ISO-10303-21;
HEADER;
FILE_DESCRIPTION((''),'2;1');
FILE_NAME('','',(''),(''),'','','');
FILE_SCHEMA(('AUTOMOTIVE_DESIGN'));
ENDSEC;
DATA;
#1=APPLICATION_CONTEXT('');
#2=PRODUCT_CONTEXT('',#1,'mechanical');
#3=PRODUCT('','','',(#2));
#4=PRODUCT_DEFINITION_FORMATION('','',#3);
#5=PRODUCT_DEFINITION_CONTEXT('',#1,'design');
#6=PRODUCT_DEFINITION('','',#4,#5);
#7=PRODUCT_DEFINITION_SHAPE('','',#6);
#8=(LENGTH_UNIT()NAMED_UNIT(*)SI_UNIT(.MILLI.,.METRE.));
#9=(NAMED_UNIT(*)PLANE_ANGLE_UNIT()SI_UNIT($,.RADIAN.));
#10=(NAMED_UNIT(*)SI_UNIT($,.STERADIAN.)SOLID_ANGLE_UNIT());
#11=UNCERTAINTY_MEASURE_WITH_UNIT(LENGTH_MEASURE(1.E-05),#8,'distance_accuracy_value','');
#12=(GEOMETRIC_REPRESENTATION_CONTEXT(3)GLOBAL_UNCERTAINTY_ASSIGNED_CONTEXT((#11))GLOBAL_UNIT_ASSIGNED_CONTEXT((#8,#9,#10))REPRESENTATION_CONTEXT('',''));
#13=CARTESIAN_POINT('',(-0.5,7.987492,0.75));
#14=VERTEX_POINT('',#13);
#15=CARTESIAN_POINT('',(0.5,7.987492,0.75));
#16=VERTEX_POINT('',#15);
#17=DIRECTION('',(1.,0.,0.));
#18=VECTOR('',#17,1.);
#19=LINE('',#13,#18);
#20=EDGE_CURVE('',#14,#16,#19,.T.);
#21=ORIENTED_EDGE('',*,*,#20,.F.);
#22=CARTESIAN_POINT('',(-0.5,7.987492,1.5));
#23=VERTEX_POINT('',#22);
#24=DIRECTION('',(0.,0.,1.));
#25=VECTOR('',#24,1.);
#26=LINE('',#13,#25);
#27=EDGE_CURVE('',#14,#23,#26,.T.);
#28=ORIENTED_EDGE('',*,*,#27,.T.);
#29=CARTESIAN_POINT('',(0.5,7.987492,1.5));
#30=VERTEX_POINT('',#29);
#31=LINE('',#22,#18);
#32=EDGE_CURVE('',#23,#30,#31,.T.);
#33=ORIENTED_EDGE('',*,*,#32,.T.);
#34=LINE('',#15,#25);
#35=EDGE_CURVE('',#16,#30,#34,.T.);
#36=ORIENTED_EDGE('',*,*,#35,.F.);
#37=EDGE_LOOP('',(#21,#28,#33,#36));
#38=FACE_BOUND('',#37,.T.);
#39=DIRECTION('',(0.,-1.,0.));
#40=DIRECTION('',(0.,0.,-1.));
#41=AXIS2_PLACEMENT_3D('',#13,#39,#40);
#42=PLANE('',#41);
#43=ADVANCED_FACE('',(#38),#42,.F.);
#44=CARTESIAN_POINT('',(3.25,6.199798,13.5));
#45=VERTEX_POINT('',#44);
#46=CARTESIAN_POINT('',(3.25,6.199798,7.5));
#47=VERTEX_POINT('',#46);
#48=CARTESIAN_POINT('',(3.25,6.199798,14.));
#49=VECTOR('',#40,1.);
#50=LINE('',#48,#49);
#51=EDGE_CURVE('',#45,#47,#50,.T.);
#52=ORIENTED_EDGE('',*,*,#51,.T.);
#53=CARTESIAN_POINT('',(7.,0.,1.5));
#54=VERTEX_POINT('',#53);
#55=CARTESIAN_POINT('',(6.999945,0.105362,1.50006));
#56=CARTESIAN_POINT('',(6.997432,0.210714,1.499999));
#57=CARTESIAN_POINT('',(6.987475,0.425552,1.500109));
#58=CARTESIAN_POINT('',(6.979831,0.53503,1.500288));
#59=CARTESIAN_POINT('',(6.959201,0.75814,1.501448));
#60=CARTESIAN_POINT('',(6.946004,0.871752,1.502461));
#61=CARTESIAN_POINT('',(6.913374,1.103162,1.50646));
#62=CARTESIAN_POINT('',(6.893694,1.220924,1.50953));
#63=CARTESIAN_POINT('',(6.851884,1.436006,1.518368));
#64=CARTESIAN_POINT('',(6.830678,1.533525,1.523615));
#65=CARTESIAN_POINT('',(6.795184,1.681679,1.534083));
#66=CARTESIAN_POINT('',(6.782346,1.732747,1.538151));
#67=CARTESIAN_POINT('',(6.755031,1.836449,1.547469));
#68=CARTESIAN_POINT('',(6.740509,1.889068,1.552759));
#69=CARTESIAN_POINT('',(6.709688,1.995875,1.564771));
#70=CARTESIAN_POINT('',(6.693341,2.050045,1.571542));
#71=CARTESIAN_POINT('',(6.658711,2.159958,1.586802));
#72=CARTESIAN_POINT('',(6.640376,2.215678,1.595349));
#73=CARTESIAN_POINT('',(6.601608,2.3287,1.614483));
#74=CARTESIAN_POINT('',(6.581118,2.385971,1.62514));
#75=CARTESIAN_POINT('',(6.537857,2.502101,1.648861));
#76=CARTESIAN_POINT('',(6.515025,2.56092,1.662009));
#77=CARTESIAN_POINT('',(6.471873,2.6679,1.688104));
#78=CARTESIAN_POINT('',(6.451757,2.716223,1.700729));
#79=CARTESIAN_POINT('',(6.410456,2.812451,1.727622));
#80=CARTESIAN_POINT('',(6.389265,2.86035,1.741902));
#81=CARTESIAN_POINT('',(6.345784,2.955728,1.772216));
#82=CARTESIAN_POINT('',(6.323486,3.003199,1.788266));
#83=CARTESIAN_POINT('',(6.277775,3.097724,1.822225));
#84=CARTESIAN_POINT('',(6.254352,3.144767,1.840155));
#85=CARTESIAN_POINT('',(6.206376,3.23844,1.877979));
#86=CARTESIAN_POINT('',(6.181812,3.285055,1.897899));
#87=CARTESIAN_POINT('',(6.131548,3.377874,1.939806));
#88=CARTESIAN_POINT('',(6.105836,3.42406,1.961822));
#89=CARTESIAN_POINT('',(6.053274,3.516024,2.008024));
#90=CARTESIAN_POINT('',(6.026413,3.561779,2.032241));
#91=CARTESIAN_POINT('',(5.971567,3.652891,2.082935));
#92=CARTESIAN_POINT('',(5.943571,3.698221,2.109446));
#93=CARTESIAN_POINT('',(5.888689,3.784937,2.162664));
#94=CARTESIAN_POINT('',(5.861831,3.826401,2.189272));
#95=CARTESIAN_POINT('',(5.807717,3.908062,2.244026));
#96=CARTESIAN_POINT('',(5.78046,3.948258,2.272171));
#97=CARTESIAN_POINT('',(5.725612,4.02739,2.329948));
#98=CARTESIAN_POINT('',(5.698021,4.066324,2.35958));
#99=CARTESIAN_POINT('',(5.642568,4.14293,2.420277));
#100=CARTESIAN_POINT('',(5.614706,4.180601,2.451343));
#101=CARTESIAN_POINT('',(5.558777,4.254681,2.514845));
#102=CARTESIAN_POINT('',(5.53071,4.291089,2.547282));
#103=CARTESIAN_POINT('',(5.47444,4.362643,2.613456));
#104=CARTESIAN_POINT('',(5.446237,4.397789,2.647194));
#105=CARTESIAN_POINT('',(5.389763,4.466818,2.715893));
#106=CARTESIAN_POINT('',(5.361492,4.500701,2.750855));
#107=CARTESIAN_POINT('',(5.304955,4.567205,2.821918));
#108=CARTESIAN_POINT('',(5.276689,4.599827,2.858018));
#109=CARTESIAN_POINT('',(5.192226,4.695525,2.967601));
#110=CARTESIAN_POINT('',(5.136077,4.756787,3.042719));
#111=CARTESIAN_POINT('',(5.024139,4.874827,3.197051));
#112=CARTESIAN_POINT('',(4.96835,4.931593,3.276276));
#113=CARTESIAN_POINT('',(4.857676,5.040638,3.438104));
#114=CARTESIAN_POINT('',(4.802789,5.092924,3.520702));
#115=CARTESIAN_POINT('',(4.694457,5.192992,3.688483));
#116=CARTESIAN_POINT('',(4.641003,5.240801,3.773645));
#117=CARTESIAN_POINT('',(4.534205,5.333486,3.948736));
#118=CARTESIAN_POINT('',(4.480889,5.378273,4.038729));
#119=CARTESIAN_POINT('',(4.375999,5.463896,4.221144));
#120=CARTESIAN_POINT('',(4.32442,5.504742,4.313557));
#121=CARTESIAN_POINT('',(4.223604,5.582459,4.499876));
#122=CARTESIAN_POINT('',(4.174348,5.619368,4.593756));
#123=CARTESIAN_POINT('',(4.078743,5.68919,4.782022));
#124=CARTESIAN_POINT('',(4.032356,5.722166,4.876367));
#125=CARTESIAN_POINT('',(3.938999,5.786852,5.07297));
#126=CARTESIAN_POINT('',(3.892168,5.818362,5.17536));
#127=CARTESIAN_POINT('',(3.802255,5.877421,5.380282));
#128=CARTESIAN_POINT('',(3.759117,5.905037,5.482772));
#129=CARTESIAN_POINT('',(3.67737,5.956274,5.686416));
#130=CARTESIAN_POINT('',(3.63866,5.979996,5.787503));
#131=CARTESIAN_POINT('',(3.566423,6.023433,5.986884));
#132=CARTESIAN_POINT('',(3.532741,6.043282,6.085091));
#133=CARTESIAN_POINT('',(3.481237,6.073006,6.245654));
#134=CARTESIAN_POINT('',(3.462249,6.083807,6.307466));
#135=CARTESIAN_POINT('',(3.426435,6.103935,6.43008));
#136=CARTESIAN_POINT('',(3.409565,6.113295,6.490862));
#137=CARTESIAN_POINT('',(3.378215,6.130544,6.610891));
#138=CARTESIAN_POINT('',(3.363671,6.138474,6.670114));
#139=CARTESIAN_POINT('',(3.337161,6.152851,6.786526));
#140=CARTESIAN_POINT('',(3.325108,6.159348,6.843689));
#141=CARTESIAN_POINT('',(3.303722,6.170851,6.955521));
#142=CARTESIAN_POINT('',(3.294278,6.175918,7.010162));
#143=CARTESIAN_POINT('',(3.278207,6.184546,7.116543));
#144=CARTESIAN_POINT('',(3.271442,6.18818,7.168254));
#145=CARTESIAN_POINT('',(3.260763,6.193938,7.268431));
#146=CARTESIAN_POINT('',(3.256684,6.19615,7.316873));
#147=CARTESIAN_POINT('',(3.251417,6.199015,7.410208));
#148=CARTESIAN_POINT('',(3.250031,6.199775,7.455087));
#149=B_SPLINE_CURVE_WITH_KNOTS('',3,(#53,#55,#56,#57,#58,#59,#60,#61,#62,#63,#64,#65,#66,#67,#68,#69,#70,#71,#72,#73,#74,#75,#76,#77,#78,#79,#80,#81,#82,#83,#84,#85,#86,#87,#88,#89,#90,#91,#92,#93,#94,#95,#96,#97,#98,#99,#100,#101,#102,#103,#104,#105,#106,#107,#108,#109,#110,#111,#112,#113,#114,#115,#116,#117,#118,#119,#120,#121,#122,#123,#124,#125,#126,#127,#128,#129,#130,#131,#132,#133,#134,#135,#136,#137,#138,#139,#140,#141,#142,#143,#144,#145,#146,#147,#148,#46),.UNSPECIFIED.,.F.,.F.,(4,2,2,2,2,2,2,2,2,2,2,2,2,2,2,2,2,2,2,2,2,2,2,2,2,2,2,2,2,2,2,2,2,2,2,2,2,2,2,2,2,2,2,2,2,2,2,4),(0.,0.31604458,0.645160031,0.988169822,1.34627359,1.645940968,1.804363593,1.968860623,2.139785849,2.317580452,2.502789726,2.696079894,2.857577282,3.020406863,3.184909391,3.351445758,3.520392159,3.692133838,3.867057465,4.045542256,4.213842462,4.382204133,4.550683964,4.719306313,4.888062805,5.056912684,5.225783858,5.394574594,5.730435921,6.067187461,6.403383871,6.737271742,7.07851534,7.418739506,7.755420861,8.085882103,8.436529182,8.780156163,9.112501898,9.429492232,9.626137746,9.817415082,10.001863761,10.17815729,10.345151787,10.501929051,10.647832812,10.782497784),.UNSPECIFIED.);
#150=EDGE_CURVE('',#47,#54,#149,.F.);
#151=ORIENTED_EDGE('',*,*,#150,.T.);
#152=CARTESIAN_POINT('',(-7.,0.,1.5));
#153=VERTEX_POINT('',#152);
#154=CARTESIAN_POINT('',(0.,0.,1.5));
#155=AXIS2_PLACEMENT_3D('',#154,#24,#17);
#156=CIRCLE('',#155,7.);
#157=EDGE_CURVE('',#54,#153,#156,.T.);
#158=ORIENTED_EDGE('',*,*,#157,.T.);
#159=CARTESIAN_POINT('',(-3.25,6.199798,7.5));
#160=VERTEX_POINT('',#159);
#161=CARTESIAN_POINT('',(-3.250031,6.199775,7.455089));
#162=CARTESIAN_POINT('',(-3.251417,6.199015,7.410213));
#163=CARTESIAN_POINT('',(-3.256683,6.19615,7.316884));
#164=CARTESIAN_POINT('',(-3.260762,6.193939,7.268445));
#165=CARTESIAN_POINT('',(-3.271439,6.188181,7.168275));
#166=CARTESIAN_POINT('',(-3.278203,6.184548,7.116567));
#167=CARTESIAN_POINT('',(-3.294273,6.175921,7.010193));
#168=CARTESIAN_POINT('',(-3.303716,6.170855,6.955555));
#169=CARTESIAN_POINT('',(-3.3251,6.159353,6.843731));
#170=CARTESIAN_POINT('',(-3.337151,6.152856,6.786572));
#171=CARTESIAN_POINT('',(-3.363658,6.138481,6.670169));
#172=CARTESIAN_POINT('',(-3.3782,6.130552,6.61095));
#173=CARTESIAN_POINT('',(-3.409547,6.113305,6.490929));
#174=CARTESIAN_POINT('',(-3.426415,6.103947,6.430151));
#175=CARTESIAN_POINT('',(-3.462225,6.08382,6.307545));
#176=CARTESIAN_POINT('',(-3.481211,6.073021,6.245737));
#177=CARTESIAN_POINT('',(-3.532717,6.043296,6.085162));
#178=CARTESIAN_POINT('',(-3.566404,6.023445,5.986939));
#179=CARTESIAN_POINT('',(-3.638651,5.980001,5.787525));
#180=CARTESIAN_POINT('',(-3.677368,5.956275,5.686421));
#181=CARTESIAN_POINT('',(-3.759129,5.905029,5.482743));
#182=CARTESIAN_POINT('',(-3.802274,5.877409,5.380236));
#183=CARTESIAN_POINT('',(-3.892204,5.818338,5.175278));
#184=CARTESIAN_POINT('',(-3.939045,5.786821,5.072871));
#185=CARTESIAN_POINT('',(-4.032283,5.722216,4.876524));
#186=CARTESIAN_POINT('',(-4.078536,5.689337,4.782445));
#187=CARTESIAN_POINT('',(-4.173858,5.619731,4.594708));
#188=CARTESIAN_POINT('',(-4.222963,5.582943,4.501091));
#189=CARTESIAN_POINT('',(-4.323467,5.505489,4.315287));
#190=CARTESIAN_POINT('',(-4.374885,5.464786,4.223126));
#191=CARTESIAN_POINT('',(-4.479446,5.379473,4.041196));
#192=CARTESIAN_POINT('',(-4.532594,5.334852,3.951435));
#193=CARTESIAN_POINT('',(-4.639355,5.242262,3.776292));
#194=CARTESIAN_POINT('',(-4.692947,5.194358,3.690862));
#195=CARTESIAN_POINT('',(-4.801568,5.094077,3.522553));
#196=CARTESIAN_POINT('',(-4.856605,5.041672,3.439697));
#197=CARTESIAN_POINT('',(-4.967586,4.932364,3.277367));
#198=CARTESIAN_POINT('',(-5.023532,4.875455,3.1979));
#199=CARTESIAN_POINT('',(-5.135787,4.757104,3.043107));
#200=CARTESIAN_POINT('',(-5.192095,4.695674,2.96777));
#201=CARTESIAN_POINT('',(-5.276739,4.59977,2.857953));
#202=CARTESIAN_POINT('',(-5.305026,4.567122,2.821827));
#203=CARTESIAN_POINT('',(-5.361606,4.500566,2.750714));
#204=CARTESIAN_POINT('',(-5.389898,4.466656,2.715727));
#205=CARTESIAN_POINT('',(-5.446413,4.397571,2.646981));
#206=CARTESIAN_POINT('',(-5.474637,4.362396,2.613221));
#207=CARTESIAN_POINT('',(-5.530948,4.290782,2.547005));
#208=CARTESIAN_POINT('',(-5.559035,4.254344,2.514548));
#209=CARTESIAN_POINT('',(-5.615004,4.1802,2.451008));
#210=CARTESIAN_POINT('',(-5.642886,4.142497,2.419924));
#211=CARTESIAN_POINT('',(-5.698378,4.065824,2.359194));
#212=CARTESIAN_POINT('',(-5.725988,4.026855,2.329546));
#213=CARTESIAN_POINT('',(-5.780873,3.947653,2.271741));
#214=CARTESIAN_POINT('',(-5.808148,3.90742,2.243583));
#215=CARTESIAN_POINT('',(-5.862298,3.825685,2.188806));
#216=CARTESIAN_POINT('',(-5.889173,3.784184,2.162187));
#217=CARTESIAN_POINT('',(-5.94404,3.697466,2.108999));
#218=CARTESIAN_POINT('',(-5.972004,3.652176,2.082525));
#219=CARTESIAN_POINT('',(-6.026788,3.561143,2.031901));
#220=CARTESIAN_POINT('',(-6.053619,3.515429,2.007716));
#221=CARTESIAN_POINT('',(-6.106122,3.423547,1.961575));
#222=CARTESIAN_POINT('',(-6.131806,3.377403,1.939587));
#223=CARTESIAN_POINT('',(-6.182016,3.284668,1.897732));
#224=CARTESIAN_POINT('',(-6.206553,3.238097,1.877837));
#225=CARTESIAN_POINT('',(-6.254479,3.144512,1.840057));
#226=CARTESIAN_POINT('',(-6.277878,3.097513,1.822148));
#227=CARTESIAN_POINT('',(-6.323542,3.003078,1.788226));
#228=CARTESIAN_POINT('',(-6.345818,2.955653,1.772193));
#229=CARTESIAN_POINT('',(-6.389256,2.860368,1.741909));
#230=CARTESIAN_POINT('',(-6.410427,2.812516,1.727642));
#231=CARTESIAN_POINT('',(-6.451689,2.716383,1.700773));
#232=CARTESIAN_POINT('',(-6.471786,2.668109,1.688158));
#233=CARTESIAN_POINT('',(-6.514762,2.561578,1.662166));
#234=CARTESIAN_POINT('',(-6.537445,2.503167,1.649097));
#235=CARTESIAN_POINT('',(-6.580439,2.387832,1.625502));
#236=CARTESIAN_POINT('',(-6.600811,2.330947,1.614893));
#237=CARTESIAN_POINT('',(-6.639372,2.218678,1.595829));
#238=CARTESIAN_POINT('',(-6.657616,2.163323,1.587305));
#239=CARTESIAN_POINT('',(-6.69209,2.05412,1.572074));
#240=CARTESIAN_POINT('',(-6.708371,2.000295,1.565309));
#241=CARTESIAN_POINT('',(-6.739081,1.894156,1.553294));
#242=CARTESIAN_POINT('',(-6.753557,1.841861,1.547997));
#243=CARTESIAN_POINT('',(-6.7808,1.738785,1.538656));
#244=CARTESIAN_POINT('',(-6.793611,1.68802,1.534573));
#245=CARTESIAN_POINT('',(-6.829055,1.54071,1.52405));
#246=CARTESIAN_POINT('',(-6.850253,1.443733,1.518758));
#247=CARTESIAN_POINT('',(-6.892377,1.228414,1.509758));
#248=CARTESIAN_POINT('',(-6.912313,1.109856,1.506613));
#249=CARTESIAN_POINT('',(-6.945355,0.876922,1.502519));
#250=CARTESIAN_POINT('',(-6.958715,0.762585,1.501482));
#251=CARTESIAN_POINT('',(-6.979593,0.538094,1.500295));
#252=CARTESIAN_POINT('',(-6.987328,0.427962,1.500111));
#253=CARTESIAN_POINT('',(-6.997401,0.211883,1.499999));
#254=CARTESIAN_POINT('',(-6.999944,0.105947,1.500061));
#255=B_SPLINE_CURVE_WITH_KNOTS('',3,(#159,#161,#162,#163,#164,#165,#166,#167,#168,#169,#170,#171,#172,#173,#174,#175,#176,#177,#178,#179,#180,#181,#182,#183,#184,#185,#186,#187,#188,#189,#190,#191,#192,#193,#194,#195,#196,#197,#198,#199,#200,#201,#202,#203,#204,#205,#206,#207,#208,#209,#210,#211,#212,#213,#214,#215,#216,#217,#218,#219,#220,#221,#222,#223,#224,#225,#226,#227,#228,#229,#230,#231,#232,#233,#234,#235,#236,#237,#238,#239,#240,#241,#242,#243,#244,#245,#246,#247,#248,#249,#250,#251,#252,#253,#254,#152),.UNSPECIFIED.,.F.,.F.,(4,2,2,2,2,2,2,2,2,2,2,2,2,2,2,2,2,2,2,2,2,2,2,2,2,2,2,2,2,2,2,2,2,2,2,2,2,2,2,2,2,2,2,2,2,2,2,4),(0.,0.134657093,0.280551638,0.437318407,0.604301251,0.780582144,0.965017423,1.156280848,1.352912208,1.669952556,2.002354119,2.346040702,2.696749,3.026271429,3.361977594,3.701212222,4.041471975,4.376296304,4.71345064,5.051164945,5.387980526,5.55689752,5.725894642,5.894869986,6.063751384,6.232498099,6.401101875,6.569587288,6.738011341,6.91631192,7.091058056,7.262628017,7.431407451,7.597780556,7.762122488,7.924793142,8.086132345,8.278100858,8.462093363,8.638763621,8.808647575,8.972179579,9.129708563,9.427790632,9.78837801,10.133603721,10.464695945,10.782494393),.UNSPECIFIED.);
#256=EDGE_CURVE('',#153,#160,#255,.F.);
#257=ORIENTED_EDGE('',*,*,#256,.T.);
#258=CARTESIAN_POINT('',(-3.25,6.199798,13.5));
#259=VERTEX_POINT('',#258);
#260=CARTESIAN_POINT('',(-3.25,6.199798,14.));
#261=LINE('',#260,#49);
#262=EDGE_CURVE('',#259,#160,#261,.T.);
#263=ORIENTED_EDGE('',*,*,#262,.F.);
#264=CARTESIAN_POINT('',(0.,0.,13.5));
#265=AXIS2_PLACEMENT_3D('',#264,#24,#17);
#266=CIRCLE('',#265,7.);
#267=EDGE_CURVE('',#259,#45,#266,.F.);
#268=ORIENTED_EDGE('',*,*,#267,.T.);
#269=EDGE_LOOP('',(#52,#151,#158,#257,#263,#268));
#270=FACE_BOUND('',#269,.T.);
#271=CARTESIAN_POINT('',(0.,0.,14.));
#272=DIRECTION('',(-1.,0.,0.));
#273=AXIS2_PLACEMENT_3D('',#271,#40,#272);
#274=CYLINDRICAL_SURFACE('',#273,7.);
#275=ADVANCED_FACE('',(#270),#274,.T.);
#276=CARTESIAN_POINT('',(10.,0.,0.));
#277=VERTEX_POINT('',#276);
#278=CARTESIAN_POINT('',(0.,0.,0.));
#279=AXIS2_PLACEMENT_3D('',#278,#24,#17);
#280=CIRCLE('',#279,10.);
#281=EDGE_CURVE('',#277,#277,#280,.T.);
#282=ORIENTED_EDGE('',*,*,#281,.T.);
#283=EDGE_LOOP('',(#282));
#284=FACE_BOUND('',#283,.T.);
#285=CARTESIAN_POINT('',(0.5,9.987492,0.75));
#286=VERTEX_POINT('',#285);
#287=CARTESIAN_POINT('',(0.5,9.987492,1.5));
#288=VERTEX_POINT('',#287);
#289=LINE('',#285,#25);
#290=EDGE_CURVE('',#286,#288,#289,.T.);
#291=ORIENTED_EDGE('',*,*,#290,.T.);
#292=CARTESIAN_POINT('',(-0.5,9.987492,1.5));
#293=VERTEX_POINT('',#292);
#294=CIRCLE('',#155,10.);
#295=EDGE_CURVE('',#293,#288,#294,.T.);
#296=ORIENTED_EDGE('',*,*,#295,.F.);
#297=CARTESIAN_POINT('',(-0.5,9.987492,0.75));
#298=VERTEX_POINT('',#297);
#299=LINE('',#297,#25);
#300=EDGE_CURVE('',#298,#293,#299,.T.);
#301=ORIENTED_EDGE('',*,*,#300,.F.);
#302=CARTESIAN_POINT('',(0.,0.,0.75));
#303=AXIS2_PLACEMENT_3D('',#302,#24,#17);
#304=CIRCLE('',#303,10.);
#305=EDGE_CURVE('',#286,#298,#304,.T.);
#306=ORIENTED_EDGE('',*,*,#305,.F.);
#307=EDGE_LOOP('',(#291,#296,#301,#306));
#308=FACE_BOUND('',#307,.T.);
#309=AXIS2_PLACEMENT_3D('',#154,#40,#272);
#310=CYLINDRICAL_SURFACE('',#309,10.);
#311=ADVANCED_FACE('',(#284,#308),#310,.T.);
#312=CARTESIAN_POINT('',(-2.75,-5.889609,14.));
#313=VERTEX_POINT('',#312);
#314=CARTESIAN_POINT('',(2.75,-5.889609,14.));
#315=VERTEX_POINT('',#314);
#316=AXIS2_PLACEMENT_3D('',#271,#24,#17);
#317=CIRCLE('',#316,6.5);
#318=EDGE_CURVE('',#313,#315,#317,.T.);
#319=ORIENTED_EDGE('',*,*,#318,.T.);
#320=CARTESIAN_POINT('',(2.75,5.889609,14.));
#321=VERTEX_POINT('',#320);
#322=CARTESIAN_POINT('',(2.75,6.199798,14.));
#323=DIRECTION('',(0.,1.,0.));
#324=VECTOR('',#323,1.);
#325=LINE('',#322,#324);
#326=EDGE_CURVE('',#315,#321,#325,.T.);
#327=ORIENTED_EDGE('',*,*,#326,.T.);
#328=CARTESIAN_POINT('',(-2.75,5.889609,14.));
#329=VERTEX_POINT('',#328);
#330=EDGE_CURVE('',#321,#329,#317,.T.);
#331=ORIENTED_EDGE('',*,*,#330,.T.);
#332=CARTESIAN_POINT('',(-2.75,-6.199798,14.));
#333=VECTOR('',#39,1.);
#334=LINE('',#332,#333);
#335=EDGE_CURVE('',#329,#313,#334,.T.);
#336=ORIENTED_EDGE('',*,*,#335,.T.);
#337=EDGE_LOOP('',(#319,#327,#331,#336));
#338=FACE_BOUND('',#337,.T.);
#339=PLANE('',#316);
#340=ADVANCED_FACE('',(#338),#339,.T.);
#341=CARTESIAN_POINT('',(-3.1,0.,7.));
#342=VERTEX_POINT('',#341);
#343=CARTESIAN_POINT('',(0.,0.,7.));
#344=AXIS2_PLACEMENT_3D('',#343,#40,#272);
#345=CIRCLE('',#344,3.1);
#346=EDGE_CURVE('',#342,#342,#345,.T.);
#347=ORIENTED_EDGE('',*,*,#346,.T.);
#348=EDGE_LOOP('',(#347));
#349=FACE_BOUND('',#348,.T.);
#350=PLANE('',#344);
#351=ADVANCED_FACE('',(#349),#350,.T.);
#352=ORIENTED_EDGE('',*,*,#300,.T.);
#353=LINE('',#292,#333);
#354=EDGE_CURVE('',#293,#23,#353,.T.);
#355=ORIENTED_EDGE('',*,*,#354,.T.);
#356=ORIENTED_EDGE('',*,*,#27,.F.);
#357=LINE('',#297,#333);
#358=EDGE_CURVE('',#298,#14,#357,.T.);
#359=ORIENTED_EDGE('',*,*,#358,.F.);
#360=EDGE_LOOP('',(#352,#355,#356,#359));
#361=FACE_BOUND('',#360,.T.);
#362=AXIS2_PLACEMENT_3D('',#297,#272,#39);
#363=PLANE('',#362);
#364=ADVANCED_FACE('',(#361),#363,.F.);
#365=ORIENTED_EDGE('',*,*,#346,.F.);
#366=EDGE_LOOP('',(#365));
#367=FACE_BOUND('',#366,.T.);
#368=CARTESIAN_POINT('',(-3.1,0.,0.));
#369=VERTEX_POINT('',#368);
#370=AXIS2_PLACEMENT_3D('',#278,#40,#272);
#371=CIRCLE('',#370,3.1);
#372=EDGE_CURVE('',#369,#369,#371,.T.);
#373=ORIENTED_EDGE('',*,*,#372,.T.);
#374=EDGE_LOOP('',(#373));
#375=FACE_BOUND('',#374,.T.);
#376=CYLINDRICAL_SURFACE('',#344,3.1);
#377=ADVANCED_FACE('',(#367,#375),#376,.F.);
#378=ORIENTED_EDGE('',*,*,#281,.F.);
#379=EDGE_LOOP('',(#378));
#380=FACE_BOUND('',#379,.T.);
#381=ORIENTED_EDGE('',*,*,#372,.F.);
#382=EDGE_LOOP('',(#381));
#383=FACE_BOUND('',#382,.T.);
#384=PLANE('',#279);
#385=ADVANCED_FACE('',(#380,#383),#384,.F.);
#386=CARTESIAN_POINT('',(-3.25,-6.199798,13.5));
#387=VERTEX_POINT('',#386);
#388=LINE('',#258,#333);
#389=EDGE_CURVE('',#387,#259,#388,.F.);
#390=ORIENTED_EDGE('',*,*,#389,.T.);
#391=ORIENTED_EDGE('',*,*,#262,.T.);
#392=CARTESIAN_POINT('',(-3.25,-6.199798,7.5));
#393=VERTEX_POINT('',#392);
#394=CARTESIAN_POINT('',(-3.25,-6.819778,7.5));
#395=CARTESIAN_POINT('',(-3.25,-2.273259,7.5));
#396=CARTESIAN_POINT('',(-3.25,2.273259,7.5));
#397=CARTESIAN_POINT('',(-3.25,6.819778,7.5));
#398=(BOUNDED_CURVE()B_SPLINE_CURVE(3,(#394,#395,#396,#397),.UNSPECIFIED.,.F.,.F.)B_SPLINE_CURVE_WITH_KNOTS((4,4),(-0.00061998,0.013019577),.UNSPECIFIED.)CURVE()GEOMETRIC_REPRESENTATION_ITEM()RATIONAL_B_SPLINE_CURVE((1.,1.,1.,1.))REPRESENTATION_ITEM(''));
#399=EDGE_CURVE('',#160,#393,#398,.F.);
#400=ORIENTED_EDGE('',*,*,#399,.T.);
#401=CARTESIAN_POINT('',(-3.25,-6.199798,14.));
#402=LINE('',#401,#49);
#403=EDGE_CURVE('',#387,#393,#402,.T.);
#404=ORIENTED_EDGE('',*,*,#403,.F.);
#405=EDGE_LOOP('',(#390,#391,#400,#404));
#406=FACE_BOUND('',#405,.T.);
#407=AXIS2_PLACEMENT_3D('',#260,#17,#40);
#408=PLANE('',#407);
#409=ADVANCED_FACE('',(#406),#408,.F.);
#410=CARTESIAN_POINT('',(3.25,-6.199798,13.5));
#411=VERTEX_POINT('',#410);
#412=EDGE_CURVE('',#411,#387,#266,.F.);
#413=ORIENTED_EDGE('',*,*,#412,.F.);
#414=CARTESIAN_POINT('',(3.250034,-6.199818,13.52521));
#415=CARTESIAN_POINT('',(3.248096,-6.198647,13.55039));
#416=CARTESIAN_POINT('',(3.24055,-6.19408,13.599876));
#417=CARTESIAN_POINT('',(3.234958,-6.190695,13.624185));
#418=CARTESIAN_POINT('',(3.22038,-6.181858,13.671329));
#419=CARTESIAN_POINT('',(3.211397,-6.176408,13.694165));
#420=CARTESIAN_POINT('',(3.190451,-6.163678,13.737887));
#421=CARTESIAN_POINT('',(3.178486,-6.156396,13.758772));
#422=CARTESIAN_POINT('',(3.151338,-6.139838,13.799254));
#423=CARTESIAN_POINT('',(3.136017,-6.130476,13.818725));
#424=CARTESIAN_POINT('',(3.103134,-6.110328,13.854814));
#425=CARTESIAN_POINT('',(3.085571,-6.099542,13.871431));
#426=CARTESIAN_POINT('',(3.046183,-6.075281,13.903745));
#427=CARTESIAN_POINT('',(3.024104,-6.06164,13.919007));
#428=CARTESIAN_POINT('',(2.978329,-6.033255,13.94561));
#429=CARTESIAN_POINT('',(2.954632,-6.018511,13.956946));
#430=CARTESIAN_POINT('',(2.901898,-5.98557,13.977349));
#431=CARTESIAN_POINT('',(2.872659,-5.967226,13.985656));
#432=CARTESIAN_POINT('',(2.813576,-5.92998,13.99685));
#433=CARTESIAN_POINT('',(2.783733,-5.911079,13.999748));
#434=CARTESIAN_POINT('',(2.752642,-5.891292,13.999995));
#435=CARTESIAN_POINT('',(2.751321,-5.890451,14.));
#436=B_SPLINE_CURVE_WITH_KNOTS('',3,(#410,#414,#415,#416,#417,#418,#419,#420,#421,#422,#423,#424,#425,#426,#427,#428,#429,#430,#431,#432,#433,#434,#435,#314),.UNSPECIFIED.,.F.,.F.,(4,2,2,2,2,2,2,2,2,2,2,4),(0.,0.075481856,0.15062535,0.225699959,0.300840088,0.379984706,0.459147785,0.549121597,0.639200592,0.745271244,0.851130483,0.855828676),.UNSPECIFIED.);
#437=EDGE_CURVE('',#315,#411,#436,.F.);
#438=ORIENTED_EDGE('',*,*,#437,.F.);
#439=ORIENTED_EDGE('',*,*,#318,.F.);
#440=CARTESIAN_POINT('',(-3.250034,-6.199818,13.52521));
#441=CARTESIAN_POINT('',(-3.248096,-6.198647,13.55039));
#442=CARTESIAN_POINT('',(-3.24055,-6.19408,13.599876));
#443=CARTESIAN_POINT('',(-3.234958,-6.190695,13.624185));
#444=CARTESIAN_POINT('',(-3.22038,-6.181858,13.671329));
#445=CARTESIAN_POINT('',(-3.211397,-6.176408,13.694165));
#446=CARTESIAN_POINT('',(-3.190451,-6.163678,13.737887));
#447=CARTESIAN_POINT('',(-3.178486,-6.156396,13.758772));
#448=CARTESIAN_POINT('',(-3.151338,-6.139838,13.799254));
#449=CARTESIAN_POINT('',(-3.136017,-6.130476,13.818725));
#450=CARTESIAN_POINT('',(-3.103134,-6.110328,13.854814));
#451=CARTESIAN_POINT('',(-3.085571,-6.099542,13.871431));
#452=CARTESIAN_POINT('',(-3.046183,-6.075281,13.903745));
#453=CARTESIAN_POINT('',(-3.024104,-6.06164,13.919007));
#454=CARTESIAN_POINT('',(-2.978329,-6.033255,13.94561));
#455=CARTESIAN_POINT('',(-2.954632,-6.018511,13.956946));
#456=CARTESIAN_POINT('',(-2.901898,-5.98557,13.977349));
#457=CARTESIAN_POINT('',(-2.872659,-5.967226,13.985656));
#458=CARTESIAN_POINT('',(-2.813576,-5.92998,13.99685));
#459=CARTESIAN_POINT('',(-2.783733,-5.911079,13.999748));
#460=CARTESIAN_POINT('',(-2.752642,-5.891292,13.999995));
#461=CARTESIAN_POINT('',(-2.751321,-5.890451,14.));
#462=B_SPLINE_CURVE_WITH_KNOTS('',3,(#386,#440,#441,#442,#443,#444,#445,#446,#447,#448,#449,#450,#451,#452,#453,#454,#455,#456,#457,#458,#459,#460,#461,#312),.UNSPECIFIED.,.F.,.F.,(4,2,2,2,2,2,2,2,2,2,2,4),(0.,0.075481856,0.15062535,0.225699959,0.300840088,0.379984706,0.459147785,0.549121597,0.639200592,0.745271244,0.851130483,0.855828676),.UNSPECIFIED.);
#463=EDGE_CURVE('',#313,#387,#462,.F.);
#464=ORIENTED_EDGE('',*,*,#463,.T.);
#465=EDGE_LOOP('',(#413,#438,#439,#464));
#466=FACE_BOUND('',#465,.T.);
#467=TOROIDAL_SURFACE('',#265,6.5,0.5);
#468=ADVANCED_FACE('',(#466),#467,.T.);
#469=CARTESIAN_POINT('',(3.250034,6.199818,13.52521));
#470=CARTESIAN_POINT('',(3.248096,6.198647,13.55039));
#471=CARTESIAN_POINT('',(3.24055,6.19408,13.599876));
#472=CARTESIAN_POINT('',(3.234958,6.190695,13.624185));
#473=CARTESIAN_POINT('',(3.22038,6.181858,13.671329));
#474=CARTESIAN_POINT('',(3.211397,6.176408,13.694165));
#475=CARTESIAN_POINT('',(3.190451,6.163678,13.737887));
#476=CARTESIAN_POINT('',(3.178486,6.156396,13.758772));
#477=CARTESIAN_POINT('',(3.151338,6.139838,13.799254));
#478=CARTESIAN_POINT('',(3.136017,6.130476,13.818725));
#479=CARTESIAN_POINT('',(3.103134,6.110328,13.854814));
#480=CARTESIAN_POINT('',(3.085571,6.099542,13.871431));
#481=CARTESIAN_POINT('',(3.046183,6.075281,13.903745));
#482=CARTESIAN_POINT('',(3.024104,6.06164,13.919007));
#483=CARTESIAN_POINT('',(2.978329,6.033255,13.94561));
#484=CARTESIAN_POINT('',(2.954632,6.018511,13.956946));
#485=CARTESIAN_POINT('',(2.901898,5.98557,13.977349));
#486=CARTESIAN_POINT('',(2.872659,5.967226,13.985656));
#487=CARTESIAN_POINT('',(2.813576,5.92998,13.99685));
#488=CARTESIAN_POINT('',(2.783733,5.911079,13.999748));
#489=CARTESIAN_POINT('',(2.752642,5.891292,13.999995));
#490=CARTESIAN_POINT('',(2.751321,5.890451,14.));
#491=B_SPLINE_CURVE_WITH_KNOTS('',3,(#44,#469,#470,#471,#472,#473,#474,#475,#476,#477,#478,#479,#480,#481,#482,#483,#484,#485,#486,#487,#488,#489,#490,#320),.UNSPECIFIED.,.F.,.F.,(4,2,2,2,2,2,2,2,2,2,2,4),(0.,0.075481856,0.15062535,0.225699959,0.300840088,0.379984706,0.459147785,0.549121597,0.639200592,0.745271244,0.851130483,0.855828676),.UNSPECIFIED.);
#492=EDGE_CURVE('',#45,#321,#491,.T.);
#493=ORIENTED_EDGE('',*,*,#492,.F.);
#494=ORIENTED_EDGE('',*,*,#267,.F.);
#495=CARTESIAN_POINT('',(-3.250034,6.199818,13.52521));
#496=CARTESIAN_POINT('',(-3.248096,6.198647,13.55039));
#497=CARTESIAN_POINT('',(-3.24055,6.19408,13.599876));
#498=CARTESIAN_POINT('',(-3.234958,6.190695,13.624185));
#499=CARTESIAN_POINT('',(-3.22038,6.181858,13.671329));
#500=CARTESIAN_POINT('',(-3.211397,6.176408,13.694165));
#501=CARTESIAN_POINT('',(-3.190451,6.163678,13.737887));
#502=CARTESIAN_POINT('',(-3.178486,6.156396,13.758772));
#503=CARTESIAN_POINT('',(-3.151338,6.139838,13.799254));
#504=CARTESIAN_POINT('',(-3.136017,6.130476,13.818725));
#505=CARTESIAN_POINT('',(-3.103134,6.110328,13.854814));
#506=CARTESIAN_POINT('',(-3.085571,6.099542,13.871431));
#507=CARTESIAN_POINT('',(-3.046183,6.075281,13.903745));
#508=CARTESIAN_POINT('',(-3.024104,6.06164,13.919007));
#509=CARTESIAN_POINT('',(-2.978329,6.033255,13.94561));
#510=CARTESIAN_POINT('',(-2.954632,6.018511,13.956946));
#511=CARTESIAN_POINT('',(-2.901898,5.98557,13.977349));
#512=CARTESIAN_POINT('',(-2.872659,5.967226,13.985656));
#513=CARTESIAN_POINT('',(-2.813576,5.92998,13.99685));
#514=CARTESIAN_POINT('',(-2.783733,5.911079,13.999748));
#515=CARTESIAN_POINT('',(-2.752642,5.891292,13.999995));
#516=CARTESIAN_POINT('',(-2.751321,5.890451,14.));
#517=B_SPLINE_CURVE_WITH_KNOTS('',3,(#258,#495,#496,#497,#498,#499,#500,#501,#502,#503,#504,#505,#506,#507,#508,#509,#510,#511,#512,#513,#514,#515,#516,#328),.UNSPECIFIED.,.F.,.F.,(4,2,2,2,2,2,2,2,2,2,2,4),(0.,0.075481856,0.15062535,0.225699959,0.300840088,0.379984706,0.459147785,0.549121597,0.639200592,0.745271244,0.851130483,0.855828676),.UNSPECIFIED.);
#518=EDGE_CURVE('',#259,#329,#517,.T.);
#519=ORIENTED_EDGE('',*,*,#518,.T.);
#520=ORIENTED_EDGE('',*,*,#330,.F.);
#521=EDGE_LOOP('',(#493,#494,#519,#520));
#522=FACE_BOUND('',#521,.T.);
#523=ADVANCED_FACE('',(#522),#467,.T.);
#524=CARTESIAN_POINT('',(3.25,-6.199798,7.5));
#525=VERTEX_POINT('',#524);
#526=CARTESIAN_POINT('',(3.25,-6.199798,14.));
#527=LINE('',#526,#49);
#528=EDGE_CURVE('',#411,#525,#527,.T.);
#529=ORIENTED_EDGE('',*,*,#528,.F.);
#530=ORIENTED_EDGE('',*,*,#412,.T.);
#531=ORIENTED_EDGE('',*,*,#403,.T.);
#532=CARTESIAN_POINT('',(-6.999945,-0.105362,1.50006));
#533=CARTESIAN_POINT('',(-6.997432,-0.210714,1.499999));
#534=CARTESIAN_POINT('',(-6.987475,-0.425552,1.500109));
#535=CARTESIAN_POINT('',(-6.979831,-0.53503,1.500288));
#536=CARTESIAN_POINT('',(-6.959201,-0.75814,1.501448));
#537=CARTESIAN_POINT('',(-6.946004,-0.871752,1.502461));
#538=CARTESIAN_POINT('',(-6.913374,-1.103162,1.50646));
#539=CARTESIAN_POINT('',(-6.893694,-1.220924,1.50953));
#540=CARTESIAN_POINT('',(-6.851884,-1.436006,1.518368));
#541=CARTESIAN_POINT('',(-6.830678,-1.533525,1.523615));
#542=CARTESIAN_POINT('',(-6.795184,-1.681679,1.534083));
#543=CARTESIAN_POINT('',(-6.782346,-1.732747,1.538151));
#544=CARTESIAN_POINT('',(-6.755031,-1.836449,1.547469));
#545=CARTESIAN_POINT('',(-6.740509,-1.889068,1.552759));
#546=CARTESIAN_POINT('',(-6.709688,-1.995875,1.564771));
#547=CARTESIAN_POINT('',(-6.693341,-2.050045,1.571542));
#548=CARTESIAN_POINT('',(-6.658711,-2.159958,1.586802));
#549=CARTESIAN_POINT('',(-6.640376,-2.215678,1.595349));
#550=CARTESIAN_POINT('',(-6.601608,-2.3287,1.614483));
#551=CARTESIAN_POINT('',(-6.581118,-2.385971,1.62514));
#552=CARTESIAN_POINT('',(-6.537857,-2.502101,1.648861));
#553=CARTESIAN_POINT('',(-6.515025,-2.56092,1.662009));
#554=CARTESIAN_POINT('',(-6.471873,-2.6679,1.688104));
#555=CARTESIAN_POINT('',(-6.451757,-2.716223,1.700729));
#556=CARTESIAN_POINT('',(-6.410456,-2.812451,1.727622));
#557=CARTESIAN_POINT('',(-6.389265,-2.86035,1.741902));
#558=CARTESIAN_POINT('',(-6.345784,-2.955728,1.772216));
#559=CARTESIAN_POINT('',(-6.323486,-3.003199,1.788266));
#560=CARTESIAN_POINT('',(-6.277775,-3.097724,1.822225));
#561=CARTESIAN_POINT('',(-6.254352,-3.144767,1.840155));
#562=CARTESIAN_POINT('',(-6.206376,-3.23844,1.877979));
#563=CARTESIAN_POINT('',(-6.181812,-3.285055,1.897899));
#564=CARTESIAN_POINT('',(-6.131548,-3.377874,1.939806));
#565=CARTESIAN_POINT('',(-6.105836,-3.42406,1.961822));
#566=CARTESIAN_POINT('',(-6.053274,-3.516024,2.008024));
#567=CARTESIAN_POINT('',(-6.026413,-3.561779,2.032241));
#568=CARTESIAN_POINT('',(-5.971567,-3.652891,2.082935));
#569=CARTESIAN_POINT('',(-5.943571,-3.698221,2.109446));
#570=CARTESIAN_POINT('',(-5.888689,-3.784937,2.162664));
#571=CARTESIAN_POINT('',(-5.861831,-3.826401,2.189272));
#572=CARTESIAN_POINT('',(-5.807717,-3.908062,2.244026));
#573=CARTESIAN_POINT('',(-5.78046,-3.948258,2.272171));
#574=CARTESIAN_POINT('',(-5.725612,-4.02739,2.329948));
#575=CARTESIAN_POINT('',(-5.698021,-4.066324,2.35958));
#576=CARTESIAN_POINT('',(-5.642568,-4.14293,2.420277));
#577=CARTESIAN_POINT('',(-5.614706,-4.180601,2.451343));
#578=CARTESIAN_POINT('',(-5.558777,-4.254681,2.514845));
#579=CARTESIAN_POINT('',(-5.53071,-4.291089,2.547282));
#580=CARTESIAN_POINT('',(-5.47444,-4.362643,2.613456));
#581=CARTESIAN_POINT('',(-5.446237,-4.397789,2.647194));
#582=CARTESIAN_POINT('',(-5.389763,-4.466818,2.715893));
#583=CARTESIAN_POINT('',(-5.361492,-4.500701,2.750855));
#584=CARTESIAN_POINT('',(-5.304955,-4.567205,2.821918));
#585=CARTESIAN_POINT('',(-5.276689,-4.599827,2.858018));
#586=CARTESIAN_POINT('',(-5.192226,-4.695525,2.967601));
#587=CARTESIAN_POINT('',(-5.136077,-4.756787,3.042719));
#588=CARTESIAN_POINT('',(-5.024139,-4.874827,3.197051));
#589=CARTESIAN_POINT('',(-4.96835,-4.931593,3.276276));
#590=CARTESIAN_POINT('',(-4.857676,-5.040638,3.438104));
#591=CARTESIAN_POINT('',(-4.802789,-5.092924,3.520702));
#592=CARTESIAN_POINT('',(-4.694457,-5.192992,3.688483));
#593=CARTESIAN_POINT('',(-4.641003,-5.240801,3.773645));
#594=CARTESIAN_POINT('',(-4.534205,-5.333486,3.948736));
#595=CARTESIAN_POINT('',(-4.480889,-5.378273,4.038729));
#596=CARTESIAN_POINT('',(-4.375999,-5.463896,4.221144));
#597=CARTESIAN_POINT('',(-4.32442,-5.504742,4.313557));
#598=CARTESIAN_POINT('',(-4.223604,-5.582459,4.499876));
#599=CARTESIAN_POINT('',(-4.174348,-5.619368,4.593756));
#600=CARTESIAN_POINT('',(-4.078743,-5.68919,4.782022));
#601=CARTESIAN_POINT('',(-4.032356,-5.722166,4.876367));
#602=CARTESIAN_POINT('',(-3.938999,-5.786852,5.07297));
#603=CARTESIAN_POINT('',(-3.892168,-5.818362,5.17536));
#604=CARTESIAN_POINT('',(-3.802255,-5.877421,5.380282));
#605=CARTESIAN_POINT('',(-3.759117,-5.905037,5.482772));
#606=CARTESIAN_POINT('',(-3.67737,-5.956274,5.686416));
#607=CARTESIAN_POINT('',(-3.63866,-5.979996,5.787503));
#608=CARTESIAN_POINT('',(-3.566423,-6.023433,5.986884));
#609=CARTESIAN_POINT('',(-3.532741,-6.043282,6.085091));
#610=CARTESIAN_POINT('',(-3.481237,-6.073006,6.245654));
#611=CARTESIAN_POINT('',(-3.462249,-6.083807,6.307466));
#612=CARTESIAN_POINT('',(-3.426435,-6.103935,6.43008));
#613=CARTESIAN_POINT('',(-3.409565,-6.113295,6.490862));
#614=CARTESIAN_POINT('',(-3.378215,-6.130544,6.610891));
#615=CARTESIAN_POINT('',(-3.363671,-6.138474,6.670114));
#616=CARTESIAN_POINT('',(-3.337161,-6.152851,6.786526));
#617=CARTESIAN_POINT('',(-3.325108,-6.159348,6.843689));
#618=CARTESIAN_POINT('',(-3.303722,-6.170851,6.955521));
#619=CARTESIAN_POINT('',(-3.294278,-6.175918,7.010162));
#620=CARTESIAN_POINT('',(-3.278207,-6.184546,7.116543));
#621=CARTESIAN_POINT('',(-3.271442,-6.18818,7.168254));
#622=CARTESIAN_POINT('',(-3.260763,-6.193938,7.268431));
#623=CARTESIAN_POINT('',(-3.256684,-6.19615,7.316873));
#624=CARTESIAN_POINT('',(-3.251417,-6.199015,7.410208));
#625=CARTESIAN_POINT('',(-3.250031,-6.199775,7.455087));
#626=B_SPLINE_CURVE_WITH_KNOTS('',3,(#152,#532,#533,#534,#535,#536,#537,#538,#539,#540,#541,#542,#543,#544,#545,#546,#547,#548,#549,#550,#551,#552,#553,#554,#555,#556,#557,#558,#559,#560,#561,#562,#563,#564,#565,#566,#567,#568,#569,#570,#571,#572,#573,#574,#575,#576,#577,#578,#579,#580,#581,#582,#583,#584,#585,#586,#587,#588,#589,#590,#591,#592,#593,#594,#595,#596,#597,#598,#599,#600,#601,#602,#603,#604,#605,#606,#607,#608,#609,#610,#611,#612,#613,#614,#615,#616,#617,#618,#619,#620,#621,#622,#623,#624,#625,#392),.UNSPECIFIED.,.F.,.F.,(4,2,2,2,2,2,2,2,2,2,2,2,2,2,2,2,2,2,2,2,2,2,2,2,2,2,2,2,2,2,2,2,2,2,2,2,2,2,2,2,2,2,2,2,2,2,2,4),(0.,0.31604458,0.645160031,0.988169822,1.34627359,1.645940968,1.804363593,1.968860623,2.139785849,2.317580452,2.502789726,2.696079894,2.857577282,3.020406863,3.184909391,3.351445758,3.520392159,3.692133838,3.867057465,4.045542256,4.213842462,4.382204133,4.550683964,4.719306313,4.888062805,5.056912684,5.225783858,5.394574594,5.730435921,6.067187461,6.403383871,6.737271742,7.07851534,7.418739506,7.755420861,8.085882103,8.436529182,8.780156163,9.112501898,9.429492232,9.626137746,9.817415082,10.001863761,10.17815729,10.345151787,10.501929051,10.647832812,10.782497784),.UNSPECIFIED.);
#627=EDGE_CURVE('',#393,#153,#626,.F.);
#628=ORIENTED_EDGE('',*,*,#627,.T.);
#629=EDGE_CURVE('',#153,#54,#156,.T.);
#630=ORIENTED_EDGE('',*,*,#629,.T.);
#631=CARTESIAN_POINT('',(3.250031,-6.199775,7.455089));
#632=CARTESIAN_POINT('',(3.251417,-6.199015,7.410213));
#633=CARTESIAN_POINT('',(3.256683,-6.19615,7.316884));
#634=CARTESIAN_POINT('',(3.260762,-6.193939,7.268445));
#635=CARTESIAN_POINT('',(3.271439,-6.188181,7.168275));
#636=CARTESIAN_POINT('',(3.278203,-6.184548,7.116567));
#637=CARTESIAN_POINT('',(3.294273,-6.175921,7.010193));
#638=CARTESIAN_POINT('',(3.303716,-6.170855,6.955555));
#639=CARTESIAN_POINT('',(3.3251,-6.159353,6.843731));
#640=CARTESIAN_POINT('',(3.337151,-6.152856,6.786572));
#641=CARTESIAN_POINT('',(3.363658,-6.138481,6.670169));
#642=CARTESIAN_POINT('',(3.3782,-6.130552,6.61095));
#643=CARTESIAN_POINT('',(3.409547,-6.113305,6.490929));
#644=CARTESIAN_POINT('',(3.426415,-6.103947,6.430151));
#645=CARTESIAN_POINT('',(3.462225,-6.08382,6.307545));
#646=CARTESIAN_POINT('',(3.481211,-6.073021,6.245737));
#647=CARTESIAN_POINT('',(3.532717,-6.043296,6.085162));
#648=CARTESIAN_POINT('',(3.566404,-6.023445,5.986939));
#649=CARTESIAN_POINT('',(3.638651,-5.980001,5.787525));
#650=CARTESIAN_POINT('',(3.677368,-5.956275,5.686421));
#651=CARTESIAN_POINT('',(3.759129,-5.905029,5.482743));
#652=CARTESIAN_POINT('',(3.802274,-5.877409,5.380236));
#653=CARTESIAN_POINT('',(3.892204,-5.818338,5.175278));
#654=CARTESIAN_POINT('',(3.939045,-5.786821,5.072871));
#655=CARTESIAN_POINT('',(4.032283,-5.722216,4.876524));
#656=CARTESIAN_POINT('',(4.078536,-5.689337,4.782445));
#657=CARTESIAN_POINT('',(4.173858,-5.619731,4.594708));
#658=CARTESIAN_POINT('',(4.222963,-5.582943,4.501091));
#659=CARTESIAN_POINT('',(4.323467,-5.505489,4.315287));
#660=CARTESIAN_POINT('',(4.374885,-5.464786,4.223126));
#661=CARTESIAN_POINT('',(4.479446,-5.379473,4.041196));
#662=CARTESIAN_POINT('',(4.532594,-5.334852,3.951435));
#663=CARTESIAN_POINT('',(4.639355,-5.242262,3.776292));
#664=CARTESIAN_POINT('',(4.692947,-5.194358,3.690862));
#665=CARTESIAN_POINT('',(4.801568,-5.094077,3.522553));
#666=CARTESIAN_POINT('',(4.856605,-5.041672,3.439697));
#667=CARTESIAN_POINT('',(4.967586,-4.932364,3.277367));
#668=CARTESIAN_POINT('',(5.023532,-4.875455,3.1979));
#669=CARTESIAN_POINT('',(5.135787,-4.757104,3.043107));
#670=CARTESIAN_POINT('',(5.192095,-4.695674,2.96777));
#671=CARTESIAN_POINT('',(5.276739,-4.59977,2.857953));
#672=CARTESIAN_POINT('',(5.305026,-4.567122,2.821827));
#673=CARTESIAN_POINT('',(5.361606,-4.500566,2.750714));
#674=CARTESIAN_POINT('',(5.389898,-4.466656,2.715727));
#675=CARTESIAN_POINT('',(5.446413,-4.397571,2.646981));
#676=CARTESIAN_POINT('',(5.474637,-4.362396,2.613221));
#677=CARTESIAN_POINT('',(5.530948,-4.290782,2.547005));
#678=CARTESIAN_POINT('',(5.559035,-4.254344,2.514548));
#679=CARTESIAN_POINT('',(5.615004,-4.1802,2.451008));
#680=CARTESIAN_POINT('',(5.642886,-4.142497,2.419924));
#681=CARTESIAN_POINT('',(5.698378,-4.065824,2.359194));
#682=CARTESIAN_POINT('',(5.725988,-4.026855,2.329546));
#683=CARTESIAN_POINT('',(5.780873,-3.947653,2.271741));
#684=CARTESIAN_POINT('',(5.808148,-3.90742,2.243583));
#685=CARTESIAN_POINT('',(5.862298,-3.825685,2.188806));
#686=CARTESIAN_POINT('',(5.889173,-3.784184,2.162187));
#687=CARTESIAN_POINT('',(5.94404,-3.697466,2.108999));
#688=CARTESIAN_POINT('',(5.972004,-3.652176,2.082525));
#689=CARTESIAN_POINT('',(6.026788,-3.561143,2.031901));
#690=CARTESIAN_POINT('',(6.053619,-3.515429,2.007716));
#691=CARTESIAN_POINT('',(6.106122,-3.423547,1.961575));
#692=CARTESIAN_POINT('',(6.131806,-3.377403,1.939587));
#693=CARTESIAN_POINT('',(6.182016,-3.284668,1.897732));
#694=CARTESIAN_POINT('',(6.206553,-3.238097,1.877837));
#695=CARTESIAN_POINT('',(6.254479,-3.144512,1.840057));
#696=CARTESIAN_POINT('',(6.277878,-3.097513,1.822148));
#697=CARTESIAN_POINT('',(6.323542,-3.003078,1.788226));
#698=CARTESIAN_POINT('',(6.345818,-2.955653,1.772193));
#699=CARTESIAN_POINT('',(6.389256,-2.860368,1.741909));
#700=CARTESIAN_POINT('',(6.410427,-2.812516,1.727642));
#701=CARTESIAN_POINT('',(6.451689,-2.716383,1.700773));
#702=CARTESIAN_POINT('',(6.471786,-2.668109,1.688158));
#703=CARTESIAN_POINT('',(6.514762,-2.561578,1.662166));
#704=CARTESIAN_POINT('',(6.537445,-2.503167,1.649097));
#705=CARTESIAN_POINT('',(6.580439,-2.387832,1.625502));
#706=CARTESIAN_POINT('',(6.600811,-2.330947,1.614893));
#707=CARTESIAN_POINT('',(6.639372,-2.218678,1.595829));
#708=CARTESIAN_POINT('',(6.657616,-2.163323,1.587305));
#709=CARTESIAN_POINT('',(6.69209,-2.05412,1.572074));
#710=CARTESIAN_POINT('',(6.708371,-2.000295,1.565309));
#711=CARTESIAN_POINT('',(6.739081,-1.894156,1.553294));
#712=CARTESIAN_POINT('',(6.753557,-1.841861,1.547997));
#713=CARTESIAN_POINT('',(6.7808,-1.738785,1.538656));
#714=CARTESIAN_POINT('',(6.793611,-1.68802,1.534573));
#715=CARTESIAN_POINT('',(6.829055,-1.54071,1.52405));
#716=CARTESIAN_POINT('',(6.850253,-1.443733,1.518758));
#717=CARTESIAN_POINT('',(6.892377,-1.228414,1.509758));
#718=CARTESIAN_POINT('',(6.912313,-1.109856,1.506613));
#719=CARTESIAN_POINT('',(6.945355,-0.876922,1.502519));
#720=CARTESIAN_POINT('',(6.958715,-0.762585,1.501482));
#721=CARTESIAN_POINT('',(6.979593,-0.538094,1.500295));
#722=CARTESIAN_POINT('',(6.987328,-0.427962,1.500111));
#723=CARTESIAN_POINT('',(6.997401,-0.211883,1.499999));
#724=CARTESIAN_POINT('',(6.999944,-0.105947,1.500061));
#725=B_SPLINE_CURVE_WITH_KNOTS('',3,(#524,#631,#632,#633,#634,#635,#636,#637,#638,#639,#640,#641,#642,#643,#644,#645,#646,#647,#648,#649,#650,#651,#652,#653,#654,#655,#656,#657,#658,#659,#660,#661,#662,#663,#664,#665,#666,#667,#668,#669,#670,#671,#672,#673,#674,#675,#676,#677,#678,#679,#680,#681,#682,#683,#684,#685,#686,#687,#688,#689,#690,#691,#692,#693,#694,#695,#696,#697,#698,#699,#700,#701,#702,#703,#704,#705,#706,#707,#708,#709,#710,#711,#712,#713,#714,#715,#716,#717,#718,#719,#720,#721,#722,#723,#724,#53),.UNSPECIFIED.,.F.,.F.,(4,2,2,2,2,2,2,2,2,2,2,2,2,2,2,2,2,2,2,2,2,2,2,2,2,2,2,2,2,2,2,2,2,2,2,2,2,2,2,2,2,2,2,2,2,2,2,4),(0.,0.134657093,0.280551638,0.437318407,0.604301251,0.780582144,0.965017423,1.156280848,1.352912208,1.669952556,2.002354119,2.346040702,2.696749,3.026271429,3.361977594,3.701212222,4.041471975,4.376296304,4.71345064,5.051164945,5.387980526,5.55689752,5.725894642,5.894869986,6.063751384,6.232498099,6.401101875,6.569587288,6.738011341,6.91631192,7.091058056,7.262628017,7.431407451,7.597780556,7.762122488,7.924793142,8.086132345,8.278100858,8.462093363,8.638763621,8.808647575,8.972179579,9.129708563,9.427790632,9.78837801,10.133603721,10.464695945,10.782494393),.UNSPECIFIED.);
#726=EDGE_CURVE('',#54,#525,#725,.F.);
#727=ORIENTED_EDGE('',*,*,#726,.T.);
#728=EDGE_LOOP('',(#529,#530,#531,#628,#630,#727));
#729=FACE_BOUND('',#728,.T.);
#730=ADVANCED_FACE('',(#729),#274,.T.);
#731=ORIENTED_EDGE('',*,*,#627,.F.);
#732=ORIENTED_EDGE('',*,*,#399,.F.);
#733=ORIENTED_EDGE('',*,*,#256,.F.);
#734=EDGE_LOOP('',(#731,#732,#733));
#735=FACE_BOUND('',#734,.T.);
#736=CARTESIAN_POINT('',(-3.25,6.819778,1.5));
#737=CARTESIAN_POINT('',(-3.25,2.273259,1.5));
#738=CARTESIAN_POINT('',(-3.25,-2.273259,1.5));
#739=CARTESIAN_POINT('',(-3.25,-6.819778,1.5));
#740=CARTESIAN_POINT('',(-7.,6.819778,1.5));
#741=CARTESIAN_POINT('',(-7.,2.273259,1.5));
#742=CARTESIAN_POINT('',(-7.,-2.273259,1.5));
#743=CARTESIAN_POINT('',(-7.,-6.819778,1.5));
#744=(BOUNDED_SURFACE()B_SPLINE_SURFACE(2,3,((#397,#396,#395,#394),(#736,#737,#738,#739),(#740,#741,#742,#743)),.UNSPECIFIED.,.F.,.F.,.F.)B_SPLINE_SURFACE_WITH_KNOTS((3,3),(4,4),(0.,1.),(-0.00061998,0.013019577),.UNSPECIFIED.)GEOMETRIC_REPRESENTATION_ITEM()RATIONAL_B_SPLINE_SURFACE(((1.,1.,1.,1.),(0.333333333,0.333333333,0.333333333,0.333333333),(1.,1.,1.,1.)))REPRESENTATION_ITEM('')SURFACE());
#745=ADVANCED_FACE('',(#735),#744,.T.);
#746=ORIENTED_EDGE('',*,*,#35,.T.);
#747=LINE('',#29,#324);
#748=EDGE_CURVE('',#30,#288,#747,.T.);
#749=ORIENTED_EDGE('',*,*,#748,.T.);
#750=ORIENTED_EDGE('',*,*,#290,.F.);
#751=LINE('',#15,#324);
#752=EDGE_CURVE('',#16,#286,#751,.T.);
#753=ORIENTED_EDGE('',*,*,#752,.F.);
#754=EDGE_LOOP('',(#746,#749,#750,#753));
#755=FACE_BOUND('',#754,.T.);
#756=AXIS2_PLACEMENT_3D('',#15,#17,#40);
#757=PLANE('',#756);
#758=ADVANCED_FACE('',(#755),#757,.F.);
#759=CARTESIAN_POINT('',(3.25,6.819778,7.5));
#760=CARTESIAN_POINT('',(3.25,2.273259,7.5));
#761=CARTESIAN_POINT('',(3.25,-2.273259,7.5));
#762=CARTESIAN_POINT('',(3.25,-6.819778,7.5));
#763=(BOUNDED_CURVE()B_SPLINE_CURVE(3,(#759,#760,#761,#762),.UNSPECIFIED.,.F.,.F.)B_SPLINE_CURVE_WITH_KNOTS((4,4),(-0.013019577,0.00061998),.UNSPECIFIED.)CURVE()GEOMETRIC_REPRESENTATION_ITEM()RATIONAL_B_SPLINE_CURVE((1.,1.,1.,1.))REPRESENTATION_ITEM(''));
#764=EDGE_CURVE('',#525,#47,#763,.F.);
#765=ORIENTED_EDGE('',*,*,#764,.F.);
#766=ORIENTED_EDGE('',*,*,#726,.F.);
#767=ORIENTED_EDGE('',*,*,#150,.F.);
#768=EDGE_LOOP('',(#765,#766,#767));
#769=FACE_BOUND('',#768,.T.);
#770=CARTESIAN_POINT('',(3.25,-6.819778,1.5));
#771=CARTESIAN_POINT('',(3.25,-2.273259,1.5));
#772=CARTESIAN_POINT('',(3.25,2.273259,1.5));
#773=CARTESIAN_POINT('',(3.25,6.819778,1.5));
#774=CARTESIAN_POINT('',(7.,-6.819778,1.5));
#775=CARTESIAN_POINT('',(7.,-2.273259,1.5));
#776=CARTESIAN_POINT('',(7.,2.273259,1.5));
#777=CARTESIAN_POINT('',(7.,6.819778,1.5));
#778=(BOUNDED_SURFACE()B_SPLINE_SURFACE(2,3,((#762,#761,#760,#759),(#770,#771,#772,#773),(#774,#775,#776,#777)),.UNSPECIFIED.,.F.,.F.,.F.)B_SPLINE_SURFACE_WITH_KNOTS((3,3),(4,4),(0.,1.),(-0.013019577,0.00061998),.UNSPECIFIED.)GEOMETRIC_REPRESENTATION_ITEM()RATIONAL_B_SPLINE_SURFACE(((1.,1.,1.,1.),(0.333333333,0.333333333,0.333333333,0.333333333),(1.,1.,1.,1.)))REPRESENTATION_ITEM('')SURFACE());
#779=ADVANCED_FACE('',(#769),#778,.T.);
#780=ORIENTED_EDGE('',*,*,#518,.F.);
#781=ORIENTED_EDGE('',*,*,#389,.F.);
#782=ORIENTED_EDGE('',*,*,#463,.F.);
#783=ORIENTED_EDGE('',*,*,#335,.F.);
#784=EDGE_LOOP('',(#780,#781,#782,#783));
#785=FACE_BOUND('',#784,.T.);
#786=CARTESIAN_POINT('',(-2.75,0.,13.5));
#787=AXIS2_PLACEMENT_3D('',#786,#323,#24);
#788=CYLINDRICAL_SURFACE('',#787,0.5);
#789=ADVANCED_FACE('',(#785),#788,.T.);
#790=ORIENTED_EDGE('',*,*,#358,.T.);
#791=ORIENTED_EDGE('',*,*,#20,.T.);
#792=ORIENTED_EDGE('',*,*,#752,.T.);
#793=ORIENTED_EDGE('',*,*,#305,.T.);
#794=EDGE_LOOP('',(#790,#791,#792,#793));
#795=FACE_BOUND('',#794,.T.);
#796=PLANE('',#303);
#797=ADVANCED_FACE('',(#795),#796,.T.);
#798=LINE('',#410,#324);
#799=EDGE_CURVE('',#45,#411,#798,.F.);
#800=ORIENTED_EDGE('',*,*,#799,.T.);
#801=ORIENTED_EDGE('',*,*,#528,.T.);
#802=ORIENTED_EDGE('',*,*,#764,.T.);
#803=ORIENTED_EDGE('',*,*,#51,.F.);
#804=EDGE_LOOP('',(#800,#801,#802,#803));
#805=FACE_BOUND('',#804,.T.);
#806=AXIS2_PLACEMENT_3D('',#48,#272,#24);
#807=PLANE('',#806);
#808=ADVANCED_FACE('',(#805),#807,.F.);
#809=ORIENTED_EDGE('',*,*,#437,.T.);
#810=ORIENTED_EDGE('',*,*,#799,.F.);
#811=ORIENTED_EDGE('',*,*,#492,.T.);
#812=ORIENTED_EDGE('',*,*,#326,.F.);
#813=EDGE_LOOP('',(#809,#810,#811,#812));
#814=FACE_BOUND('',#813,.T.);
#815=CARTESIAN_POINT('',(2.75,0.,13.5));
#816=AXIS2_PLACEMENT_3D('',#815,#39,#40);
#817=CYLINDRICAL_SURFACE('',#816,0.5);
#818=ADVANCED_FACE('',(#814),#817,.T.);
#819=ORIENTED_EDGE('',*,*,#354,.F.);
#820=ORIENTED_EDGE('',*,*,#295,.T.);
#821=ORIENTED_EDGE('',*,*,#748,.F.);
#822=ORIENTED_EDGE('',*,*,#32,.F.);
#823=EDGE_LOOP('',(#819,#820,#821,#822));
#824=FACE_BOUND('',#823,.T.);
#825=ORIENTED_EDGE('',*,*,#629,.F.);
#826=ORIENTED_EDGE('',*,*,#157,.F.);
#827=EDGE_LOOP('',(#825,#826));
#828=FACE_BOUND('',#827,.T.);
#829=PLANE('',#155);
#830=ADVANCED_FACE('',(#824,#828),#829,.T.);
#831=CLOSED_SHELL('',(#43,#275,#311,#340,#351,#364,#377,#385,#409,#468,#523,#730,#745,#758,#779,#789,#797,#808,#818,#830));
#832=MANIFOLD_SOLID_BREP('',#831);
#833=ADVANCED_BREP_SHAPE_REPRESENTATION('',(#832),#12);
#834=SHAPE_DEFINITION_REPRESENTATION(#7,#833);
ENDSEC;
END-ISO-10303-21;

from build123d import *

# Parameters (mm, degrees)
SKETCH1_R           = 10
BOSS_EXTRUDE1_DEPTH = 1.5
BOSS_EXTRUDE2_DEPTH = 12.5
CUT_EXTRUDE2_START  = -0.75
CUT_EXTRUDE2_DEPTH  = 0.75
SKETCH5_R           = 3.1
CUT_EXTRUDE3_DEPTH  = 7
FILLET5_SIZE        = 3.75
FILLET5_SIZE_2      = 6
FILLET6_R           = 0.5


with BuildPart() as part:
    # Sketch1 → Boss-Extrude1 (new body)
    with BuildSketch(Plane.XY):
        Circle(SKETCH1_R)
    extrude(amount=BOSS_EXTRUDE1_DEPTH)

    # Sketch2 → Boss-Extrude2 (add)
    with BuildSketch(Plane.XY.offset(1.5)):
        with BuildLine():
            Line((-3.25, 6.199798384), (-3.25, -6.199798384))
            ThreePointArc((-3.25, -6.199798384), (0, -7), (3.25, -6.199798384))
            Line((3.25, -6.199798384), (3.25, 6.199798384))
            ThreePointArc((3.25, 6.199798384), (0, 7), (-3.25, 6.199798384))
        make_face()
    extrude(amount=BOSS_EXTRUDE2_DEPTH)

    # Sketch4 → Cut-Extrude2 (cut)
    with BuildSketch(Plane.XY.offset(1.5).offset(CUT_EXTRUDE2_START)):
        with BuildLine():
            Line((-0.5, 9.987492178), (-0.5, 7.987492178))
            Line((-0.5, 7.987492178), (0.5, 7.987492178))
            Line((0.5, 7.987492178), (0.5, 9.987492178))
            ThreePointArc((0.5, 9.987492178), (0, 10), (-0.5, 9.987492178))
        make_face()
    extrude(amount=CUT_EXTRUDE2_DEPTH, mode=Mode.SUBTRACT)

    # Sketch5 → Cut-Extrude3 (cut)
    with BuildSketch(Plane(origin=(0, 0, 0), x_dir=(-1, 0, 0), z_dir=(0, 0, -1))):
        Circle(SKETCH5_R)
    extrude(amount=-CUT_EXTRUDE3_DEPTH, mode=Mode.SUBTRACT)

    # Fillet5
    # a fillet whose section is not a circle: 6, 3.75 mm, written as the material it adds along each edge
    with BuildSketch(Plane(origin=(-3.25, 21.199798384, 1.5), x_dir=(-1, 0, 0), z_dir=(0, -1, 0))) as fillet5_piece_1_section:
        with BuildLine():
            Bezier((FILLET5_SIZE, 0), (0, 0), (0, -FILLET5_SIZE_2), weights=[1, 0.333333333, 1])
            Line((0, -FILLET5_SIZE_2), (0, 0))
            Line((0, 0), (FILLET5_SIZE, 0))
        make_face()
    fillet5_piece_1 = extrude(amount=42.399596768, mode=Mode.PRIVATE)
    fillet5_piece_1 = fillet5_piece_1 & Plane(origin=(0, 0, 1.5), x_dir=(0.4642857142857146, 0.8856854834026602, 0), z_dir=(0, 0, -1)) * Cylinder(7, 109, mode=Mode.PRIVATE)
    add(fillet5_piece_1)
    with BuildSketch(Plane(origin=(3.25, -21.199798384, 1.5), x_dir=(1, 0, 0), z_dir=(0, 1, 0))) as fillet5_piece_2_section:
        with BuildLine():
            Bezier((FILLET5_SIZE, 0), (0, 0), (0, -FILLET5_SIZE_2), weights=[1, 0.333333333, 1])
            Line((0, -FILLET5_SIZE_2), (0, 0))
            Line((0, 0), (FILLET5_SIZE, 0))
        make_face()
    fillet5_piece_2 = extrude(amount=42.399596768, mode=Mode.PRIVATE)
    fillet5_piece_2 = fillet5_piece_2 & Plane(origin=(0, 0, 1.5), x_dir=(0.4642857142857146, 0.8856854834026602, 0), z_dir=(0, 0, -1)) * Cylinder(7, 109, mode=Mode.PRIVATE)
    add(fillet5_piece_2)

    # Fillet6
    fillet6_edges = [part.edges().sort_by_distance(p)[0] for p in [
        (3.25, 0, 14),
        (0, -7, 14),
        (-3.25, 0, 14),
        (0, 7, 14),
    ]]
    fillet(fillet6_edges, radius=FILLET6_R)


solid = part.part
